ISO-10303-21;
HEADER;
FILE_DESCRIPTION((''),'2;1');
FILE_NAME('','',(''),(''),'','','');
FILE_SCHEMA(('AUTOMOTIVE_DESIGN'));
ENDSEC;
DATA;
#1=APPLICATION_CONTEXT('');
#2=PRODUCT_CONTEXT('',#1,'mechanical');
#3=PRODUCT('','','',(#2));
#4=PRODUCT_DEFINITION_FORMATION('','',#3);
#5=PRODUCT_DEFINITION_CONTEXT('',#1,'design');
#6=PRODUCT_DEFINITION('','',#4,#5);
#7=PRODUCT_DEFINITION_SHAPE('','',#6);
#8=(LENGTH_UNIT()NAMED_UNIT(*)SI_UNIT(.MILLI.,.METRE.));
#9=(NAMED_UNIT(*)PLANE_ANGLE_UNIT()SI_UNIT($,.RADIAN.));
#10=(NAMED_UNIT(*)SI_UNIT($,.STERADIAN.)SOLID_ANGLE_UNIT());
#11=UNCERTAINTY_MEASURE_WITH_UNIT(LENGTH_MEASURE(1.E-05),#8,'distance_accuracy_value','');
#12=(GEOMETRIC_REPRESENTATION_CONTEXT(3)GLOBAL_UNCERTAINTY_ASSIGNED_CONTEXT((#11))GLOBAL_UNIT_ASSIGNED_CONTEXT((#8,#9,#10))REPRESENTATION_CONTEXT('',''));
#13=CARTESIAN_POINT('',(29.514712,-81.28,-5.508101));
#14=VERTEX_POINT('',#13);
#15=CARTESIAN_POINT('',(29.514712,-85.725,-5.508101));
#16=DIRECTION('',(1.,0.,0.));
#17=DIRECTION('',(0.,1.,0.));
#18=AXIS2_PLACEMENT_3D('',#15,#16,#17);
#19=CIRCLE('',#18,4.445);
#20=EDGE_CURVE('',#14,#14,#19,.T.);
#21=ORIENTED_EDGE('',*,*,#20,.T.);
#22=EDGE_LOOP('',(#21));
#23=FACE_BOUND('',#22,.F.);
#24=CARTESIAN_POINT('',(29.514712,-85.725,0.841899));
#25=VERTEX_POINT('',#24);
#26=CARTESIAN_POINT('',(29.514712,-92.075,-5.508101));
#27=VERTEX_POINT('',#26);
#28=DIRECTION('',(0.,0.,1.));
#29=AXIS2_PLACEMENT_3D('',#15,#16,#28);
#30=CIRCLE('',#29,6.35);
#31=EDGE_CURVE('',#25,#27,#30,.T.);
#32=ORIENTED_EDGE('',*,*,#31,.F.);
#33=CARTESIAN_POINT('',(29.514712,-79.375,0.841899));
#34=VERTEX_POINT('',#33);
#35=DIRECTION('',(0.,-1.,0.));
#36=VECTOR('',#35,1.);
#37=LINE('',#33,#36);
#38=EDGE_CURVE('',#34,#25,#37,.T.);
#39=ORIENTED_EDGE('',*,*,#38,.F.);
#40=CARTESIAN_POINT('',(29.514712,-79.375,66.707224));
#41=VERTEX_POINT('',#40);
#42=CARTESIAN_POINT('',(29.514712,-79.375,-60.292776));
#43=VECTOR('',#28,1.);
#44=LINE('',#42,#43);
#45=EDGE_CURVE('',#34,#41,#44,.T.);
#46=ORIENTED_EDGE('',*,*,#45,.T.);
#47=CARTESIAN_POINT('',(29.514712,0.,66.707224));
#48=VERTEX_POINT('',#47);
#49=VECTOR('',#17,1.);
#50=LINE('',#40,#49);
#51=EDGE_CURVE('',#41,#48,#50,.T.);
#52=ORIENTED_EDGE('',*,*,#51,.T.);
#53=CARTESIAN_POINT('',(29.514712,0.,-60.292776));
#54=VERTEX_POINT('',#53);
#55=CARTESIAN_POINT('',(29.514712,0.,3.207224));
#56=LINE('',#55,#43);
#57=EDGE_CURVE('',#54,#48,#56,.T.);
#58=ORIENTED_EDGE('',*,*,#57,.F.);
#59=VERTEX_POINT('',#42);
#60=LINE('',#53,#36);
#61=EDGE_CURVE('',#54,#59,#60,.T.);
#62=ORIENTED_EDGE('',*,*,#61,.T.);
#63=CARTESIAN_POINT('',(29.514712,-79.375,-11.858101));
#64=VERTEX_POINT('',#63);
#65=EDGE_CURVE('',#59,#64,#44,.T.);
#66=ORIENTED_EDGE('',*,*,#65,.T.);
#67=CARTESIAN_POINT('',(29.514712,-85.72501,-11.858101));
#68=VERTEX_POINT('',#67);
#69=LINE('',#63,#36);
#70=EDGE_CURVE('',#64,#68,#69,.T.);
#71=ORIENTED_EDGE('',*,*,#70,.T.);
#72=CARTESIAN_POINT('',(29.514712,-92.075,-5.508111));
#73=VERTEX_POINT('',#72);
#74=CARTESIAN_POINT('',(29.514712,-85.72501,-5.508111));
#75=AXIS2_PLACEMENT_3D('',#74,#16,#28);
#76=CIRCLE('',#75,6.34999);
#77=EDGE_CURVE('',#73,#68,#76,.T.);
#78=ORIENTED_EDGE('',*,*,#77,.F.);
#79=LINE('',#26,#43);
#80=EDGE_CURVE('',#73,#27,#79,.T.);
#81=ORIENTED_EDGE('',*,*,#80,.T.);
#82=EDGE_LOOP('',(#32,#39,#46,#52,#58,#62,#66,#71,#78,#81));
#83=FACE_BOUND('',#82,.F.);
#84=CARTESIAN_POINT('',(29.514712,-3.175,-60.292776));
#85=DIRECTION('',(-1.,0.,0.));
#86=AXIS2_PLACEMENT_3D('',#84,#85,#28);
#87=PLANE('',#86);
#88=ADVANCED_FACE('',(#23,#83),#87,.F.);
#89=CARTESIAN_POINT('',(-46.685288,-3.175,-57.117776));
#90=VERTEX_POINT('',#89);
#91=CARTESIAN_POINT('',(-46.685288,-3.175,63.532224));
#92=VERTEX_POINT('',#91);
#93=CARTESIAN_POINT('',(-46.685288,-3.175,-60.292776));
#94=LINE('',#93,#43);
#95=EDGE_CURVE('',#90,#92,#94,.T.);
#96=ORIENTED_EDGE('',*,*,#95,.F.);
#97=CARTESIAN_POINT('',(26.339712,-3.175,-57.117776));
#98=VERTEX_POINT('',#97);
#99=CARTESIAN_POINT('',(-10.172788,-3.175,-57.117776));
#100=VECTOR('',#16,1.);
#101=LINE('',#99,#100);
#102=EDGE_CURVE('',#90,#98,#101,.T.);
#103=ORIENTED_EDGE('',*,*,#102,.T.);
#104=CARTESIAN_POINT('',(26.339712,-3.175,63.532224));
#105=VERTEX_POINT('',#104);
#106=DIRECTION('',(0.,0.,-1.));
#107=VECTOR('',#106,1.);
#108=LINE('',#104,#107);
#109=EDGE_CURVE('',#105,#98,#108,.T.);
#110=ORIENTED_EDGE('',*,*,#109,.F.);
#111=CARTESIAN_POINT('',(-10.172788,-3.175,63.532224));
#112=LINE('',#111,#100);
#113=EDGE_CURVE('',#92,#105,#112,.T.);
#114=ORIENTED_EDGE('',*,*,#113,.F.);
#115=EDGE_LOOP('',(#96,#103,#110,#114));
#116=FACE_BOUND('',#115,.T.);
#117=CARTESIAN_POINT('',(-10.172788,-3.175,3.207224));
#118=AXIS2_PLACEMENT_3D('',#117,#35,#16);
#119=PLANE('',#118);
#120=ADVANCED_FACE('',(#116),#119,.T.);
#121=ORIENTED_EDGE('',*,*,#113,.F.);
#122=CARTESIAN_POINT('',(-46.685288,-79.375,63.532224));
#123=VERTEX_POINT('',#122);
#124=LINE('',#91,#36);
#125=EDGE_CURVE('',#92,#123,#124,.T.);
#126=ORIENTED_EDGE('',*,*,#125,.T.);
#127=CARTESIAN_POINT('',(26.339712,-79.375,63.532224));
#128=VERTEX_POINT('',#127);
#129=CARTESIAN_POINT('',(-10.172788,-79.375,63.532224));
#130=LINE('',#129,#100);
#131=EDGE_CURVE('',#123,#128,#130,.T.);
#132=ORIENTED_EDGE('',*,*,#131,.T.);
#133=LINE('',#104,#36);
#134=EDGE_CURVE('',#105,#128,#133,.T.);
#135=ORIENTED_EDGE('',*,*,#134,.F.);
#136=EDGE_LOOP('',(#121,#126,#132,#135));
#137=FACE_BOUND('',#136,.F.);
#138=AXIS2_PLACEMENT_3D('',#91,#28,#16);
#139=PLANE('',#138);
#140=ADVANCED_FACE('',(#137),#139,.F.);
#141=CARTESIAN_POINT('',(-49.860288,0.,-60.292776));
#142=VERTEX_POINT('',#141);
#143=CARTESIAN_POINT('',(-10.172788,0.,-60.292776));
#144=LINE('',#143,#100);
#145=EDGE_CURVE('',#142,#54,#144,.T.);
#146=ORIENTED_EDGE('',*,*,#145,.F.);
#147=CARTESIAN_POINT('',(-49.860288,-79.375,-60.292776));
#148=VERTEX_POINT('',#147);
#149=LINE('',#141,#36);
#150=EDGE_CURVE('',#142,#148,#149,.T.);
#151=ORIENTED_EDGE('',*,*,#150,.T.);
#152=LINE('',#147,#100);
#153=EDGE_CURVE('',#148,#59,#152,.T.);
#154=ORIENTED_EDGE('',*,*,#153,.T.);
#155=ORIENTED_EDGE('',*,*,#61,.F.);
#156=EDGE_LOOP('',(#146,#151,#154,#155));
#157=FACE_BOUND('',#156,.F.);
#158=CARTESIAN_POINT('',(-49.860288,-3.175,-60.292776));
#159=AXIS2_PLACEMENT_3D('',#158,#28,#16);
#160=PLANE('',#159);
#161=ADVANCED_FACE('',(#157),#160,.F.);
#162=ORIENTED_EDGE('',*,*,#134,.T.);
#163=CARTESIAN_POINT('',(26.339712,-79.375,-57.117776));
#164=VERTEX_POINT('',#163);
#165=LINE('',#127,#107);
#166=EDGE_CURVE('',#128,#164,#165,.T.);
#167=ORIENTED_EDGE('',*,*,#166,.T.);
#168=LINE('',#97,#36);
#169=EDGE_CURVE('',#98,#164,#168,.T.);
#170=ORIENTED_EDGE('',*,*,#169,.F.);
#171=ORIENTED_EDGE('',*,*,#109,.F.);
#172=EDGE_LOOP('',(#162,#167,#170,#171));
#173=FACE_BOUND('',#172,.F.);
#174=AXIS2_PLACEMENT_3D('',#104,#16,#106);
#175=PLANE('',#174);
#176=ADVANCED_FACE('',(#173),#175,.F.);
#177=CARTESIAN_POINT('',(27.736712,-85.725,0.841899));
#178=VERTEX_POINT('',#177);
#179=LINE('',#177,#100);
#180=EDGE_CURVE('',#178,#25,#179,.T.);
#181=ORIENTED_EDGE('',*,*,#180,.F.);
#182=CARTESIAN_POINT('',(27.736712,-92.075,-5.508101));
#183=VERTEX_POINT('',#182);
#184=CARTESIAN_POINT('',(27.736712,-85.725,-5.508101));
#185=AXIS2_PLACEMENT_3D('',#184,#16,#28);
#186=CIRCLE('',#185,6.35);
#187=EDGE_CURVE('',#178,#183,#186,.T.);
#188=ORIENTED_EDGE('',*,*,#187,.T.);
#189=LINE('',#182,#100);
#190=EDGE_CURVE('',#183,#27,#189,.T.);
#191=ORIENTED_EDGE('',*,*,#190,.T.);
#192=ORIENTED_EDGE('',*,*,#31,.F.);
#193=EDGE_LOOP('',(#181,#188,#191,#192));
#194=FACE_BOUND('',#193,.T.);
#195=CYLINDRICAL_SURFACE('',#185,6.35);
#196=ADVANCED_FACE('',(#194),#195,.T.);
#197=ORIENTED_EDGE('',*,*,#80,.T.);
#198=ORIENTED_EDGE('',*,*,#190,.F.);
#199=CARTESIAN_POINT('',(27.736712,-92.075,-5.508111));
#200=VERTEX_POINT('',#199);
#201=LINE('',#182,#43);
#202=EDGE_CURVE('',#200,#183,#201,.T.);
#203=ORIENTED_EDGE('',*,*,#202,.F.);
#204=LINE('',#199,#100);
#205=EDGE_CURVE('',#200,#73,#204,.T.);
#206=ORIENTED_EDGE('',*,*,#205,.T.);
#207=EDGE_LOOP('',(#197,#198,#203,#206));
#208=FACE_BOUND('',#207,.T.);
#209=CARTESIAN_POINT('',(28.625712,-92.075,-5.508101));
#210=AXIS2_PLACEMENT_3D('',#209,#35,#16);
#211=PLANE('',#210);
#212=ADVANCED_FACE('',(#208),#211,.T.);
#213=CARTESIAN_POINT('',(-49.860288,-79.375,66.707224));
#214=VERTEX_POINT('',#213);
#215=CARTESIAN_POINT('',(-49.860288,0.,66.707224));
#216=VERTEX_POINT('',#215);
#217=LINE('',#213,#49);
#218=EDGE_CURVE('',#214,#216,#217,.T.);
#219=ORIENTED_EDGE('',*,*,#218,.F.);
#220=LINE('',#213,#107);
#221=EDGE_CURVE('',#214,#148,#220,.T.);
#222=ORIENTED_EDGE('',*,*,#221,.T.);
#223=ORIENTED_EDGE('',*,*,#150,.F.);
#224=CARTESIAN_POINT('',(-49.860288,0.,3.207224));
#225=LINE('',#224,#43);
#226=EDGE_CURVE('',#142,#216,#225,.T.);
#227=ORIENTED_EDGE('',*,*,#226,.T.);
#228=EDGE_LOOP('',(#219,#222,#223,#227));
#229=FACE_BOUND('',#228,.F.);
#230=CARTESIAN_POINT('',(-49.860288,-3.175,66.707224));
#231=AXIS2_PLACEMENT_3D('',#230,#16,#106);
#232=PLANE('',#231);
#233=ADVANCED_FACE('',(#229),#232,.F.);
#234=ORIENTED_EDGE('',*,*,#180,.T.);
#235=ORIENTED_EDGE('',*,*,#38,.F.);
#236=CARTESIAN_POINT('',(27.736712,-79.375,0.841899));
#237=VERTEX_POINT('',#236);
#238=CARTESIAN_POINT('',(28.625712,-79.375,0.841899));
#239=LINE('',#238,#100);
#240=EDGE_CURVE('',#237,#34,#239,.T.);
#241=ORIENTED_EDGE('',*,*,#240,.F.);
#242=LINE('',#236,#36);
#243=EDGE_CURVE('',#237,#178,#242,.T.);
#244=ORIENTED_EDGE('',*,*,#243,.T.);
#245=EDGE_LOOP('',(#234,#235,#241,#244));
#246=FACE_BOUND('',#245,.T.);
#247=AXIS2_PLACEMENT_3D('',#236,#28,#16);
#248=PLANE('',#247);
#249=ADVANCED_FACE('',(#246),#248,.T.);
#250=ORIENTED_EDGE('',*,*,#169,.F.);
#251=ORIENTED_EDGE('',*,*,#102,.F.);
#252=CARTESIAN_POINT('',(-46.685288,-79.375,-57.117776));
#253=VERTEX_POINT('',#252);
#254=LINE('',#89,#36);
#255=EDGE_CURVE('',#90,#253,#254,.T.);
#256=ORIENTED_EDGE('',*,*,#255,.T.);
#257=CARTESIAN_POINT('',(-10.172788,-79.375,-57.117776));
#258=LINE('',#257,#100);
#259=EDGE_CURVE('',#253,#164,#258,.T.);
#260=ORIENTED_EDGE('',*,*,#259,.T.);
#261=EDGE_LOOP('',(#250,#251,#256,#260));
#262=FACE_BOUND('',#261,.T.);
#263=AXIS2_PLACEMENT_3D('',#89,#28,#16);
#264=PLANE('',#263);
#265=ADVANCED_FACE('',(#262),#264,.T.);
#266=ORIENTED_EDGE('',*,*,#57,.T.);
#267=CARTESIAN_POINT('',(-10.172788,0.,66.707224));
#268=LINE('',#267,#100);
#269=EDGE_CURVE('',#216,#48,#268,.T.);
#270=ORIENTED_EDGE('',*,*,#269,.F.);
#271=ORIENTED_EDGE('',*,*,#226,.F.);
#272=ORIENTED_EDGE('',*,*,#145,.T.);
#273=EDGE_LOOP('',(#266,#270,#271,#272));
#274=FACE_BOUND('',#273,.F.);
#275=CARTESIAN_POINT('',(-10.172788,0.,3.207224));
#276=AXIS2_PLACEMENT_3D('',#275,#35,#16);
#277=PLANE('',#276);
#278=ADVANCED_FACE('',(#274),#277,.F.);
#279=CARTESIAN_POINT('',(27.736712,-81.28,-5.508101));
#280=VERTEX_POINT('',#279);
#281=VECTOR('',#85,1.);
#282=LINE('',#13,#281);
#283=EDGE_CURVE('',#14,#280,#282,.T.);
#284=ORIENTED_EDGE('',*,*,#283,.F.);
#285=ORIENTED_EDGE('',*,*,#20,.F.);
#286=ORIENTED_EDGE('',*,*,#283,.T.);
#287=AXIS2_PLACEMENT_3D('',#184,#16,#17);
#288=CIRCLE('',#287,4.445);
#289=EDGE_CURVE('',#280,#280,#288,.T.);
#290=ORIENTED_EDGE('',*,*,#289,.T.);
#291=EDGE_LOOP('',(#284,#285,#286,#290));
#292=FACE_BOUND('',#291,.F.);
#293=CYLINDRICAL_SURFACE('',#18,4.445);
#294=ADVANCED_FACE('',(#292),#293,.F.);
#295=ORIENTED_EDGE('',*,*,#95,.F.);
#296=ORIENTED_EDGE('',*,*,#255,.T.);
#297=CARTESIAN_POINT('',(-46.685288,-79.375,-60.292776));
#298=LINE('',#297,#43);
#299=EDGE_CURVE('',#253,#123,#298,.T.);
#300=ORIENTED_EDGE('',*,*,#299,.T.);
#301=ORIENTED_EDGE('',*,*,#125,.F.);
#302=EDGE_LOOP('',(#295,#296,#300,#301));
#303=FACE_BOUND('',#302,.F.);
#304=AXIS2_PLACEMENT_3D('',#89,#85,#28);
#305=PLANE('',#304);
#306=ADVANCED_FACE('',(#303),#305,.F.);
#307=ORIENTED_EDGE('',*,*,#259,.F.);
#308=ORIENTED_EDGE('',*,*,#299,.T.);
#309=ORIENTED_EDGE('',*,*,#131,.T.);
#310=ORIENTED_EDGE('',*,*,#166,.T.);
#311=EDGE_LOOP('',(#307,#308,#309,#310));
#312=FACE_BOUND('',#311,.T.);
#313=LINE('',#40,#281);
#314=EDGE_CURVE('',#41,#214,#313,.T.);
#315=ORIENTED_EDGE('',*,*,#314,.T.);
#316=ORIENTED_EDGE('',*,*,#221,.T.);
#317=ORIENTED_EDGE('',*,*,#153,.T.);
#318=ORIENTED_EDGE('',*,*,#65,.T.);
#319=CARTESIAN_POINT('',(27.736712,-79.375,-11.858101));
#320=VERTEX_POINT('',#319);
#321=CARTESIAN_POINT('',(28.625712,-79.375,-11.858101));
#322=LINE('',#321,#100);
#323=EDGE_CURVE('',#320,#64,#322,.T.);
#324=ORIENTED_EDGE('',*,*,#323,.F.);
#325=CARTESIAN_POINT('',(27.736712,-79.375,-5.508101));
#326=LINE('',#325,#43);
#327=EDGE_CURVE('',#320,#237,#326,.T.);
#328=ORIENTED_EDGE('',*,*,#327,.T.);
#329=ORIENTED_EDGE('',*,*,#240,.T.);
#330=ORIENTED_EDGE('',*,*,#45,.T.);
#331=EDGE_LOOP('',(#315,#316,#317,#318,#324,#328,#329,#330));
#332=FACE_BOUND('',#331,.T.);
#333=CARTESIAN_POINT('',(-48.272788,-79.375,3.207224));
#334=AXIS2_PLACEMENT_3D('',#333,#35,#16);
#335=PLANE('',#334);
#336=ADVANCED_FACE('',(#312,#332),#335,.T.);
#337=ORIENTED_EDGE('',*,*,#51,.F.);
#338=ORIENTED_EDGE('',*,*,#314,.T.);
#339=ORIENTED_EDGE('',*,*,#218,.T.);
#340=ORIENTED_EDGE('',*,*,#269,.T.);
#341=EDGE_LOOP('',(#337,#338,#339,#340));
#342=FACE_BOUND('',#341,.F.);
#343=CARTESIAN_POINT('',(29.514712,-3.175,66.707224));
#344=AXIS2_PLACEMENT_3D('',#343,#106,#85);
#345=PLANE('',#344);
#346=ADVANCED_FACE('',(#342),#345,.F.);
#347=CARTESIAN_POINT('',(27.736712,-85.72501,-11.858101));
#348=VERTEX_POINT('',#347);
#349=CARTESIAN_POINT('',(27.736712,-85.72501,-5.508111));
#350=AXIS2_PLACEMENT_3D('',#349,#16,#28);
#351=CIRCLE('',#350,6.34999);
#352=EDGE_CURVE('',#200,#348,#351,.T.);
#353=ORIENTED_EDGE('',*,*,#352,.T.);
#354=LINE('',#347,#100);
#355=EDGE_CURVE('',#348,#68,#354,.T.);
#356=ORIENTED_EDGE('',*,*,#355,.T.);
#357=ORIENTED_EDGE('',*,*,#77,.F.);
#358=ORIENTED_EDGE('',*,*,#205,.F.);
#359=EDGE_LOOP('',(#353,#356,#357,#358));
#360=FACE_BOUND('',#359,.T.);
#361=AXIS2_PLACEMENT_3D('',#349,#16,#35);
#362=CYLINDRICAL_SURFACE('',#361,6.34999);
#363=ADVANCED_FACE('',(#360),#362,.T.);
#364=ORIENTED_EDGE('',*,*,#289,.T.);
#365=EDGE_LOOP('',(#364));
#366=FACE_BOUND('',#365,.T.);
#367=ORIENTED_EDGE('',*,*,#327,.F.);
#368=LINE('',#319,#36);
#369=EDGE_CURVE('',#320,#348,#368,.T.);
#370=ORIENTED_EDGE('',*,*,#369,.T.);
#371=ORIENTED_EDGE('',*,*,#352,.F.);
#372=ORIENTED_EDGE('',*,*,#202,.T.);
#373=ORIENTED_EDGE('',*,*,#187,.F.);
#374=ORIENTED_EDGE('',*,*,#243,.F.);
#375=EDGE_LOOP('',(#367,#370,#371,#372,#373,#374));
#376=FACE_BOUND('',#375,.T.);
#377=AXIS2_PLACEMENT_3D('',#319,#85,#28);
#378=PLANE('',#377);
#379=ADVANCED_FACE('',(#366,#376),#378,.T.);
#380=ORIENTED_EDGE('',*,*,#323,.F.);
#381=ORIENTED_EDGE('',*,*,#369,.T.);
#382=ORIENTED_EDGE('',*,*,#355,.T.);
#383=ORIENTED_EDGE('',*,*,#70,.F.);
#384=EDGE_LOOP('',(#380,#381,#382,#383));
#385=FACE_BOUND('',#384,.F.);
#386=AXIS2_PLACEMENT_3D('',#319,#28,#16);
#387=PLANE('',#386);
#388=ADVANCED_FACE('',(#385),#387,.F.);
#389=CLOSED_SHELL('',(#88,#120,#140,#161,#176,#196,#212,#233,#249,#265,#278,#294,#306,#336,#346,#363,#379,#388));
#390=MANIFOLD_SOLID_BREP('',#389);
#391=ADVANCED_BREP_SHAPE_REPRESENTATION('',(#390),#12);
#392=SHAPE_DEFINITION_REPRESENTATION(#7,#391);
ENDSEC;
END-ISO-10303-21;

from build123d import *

# Parameters (mm, degrees)
F0_W     = 79.375
F0_H     = 127
F1_DEPTH = 3.175
F2_W     = 73.025
F2_H     = 3.175
F3_DEPTH = 76.2
F4_W     = 1.778
F4_H     = 12.7
F5_DEPTH = 12.7
F6_R     = 6.35
F7_R     = 6.34999
F8_R     = 4.445
F9_DEPTH = 25.4


# Not quite as in the source:
# - a fillet or chamfer is up to 0.001 mm smaller than in the source, because OpenCascade refuses the exact size


with BuildPart() as f1:
    # F0 (on Front) → F1 (new body)
    with BuildSketch(Plane.XZ):
        with Locations((-10.1727880716, 3.2072235078)):
            Rectangle(F0_W, F0_H)
    extrude(amount=F1_DEPTH)

    # F2 (on face) → F3 (join)
    with BuildSketch(Plane.XZ.offset(3.175)):
        Polygon((-46.6852880716, 63.5322235078), (-46.6852880716, 66.7072235078), (-49.8602880716, 66.7072235078), (-49.8602880716, -60.2927764922), (-46.6852880716, -60.2927764922), (-46.6852880716, -57.1177764922), align=None)
        with Locations((-10.1727880716, 65.1197235078)):
            Rectangle(F2_W, F2_H)
        Polygon((29.5147119284, 66.7072235078), (26.3397119284, 66.7072235078), (26.3397119284, 63.5322235078), (26.3397119284, -57.1177764922), (26.3397119284, -60.2927764922), (29.5147119284, -60.2927764922), align=None)
        with Locations((-10.1727880716, -58.7052764922)):
            Rectangle(F2_W, F2_H)
    extrude(amount=F3_DEPTH)

    # F4 (on face) → F5 (join)
    with BuildSketch(Plane.XZ.offset(79.375)):
        with Locations((28.6257119284, -5.5081006922)):
            Rectangle(F4_W, F4_H)
    extrude(amount=F5_DEPTH)

    # F6
    f6_edges = [f1.edges().sort_by_distance(p)[0] for p in [
        (28.625712, -92.075, 0.841899),
    ]]
    fillet(f6_edges, radius=F6_R)

    # F7 (radius 6.35 in the source; OpenCascade refuses exactly that, so slightly less here)
    f7_edges = [f1.edges().sort_by_distance(p)[0] for p in [
        (28.625712, -92.075, -11.858101),
    ]]
    fillet(f7_edges, radius=F7_R)

    # F8 (on face) → F9 (cut)
    with BuildSketch(Plane.YZ.offset(29.5147119284)):
        with Locations((-85.725, -5.5081006922)):
            Circle(F8_R)
    extrude(amount=-F9_DEPTH, mode=Mode.SUBTRACT)


solid = f1.part
